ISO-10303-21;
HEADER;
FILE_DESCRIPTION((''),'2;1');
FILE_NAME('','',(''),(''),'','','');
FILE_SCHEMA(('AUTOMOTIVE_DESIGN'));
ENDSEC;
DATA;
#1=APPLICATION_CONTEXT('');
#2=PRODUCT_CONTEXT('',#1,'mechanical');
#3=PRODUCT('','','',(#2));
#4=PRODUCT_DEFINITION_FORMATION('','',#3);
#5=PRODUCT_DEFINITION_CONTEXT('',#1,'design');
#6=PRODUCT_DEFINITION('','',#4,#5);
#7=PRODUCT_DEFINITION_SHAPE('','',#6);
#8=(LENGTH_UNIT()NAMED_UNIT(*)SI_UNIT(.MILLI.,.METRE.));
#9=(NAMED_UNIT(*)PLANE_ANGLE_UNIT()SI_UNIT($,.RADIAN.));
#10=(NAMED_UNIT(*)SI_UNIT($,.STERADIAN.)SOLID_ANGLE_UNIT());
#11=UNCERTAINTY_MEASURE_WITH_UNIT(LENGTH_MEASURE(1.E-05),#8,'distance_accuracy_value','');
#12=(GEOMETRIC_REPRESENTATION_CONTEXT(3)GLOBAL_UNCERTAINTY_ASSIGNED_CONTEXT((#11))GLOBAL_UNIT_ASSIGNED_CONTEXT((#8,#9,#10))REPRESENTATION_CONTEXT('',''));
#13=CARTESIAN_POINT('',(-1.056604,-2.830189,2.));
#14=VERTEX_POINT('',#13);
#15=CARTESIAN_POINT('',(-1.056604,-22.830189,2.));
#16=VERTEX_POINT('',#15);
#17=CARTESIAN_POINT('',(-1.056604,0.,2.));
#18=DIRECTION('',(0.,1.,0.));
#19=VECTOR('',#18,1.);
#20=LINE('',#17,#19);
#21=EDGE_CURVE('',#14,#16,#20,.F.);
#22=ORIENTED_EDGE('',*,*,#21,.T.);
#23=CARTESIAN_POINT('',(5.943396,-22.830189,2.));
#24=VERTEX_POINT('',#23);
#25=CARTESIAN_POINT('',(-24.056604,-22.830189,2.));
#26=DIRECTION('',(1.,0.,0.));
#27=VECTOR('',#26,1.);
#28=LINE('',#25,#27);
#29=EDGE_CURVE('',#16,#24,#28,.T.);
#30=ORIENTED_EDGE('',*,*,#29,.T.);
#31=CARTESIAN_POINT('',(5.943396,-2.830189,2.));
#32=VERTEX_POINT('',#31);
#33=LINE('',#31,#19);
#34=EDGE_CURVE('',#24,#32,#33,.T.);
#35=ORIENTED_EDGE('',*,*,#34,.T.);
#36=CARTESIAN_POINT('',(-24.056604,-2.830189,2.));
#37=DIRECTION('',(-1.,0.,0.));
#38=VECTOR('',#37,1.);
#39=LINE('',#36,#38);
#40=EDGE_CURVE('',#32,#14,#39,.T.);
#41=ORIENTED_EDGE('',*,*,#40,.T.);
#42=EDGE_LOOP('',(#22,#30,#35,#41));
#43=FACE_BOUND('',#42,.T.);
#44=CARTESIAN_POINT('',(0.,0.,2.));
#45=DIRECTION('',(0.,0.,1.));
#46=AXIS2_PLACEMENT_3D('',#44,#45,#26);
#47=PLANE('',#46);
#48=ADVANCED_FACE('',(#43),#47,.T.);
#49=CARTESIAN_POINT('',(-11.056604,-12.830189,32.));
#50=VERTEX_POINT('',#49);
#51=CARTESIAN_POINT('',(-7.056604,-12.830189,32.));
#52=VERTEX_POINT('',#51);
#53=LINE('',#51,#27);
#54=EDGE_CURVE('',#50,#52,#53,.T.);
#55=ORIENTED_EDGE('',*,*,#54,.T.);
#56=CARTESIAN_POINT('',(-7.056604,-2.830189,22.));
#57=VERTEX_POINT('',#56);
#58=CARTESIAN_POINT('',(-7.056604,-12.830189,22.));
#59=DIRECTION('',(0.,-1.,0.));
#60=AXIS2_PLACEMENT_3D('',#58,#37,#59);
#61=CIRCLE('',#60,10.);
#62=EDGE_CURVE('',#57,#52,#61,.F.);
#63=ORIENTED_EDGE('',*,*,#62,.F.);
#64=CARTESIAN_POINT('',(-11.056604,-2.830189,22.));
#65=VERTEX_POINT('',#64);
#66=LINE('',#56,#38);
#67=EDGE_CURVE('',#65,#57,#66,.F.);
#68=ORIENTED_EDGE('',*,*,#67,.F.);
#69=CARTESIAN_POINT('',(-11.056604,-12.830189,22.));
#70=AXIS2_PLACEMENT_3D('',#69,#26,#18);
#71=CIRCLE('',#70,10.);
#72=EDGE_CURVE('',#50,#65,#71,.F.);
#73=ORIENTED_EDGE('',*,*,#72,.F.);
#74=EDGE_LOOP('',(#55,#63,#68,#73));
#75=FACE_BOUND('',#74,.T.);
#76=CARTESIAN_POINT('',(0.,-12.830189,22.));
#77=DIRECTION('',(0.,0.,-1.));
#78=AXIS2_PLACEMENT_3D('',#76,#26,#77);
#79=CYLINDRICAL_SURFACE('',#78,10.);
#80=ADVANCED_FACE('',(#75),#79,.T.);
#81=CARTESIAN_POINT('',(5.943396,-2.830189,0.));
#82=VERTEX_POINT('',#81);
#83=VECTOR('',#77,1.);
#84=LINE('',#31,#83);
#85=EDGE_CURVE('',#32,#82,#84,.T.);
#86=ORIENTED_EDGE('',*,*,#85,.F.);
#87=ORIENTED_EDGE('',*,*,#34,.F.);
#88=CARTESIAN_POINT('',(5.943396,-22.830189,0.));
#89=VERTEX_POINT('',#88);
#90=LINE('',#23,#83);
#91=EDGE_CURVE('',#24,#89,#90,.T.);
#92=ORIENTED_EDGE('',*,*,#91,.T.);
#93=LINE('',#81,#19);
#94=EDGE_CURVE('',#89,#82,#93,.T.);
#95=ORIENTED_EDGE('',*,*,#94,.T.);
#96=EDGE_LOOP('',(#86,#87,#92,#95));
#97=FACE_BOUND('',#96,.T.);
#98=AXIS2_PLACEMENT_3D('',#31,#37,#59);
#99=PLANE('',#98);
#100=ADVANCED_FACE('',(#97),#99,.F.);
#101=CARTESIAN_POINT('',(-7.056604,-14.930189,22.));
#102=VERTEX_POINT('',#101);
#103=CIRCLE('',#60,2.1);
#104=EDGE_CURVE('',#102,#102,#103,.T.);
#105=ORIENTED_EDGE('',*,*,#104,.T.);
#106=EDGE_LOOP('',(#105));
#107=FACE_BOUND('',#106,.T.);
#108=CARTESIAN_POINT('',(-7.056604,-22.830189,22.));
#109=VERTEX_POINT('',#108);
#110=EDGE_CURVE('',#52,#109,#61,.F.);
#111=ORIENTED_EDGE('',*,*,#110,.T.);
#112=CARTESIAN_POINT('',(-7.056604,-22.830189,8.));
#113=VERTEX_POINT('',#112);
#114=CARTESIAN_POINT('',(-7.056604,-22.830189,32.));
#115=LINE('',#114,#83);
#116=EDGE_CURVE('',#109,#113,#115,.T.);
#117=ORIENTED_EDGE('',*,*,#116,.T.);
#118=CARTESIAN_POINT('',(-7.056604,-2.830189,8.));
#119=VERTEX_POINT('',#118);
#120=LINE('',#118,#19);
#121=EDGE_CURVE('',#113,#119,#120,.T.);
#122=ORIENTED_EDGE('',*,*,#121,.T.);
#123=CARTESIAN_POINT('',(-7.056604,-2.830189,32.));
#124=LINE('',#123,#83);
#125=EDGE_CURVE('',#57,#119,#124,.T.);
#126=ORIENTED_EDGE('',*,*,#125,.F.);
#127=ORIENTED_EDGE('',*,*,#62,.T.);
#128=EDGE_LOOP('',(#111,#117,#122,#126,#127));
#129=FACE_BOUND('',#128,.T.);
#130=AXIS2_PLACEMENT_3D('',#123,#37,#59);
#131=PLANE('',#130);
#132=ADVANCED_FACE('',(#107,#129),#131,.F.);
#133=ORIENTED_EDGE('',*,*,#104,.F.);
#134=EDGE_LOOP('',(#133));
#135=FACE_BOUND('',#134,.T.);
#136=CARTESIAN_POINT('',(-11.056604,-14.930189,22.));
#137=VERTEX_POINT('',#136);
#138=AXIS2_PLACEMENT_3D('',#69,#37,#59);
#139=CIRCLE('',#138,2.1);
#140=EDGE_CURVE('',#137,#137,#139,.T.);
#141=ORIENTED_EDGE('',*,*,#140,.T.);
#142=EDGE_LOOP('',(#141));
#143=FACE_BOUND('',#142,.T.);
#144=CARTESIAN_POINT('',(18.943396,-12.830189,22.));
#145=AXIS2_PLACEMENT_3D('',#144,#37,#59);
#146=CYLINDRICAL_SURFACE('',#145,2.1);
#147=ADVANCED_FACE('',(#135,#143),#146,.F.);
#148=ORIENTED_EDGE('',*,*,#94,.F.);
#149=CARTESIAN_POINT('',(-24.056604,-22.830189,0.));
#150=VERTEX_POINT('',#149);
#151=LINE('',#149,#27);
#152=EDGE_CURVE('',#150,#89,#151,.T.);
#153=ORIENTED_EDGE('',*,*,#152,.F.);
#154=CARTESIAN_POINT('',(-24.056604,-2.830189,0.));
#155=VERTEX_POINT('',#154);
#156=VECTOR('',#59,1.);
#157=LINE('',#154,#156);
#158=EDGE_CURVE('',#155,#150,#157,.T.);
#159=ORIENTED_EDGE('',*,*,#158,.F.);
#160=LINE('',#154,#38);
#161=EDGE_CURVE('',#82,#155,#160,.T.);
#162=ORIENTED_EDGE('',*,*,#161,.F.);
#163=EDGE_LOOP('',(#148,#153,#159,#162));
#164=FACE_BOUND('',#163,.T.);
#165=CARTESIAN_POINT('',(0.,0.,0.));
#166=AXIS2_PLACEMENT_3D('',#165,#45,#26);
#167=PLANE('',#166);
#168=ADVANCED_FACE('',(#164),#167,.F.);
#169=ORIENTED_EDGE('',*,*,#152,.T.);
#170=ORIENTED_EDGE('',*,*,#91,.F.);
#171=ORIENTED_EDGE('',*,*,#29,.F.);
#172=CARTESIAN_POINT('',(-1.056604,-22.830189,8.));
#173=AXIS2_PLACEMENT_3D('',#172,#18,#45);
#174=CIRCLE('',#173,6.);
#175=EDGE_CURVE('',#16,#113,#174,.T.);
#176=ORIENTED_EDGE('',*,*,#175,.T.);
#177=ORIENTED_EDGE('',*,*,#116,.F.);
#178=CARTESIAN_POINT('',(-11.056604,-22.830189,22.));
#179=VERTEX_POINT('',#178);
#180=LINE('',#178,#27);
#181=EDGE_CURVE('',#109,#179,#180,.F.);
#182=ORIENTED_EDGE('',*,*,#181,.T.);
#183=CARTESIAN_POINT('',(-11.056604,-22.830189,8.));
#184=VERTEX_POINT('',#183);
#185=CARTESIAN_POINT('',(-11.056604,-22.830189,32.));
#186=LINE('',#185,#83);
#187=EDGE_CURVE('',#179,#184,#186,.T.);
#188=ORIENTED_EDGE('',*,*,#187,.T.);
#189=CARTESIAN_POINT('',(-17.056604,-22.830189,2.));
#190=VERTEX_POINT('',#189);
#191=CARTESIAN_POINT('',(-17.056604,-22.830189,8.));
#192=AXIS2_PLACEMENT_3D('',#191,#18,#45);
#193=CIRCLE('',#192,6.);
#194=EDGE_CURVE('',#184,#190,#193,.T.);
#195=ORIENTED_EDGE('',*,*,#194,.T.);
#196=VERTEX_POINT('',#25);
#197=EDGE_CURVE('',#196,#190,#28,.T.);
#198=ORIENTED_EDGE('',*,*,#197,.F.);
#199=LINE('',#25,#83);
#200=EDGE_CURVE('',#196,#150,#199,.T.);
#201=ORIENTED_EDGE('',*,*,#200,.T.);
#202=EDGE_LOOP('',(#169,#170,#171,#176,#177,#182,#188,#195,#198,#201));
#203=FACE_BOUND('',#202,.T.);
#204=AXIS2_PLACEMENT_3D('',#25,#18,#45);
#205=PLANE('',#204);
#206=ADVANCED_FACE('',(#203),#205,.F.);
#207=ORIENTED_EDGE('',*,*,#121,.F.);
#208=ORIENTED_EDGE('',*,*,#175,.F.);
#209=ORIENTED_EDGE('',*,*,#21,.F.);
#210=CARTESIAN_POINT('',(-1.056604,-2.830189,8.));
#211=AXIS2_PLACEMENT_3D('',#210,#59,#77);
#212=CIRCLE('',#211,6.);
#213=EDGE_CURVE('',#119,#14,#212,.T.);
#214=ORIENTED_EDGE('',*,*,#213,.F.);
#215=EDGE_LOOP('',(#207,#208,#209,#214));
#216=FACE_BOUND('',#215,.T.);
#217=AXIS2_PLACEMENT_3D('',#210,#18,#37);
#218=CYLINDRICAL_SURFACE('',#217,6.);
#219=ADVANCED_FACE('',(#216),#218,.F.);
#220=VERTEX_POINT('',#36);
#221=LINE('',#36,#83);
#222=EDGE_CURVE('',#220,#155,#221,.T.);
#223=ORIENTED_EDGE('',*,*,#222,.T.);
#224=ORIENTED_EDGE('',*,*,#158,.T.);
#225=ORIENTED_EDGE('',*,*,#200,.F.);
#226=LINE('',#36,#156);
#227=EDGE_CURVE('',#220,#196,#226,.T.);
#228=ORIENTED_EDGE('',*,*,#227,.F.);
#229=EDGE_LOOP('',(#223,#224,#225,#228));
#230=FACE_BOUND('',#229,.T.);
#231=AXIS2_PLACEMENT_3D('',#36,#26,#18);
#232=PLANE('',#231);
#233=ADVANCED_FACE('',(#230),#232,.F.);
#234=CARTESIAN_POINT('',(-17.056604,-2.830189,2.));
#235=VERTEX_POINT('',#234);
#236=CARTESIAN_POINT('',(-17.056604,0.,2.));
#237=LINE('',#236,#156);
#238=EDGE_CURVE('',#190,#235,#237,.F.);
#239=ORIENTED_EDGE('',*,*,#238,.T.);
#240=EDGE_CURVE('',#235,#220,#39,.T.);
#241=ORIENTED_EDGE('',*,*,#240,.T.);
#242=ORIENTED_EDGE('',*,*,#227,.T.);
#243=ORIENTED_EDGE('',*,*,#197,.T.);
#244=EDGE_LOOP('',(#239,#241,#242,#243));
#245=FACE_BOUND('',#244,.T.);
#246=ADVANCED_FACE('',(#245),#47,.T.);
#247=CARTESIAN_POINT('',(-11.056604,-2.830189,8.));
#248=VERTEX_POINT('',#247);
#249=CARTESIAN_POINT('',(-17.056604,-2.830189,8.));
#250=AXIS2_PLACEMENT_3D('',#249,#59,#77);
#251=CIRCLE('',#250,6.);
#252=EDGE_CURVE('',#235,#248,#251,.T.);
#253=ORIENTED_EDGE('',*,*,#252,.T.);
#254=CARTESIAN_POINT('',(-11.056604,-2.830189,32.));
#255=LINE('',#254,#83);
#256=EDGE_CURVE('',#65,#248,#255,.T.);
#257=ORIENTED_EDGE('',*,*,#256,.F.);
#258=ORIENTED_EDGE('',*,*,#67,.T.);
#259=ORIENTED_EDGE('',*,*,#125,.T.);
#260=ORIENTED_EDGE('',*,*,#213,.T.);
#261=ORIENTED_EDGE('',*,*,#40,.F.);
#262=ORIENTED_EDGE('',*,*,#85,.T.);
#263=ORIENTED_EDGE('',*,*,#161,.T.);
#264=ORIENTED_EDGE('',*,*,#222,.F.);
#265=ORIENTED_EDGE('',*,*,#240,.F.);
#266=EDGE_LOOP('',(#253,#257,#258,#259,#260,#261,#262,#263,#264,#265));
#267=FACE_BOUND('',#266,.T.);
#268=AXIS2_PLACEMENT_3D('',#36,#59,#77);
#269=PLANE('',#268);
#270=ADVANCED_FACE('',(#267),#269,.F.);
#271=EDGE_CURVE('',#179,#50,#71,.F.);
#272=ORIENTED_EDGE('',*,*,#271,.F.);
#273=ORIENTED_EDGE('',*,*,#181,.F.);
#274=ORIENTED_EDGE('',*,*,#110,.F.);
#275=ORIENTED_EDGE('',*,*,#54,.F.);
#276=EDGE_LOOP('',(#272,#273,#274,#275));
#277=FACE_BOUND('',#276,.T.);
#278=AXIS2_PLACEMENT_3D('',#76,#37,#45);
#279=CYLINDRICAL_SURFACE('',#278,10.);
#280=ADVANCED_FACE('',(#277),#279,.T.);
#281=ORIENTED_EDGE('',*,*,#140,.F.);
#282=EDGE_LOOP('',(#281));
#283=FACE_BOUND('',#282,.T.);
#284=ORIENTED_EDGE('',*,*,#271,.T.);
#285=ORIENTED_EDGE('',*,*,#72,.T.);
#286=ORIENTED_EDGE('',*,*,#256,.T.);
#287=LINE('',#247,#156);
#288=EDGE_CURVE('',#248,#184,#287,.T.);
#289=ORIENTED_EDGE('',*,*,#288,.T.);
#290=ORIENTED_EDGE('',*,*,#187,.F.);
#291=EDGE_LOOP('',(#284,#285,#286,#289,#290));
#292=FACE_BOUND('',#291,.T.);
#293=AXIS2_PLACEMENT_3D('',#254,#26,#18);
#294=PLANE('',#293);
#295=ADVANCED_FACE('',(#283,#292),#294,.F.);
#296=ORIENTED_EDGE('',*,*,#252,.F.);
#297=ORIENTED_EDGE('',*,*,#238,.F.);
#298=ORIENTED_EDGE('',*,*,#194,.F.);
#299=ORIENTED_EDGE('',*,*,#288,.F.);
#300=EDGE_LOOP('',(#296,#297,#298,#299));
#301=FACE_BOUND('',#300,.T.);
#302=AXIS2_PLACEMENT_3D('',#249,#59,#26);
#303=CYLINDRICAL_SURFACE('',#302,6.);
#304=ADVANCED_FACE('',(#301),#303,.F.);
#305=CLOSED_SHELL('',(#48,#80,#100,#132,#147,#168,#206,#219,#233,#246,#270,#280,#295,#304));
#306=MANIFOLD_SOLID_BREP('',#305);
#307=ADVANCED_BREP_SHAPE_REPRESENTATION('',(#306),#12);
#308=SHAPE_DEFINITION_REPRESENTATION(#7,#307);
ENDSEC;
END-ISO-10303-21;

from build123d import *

# Parameters (mm, degrees)
SKETCH_4_W          = 30
SKETCH_4_H          = 20
EXTRUDE_1_DEPTH     = 2
SKETCH_5_W          = 4
SKETCH_5_H          = 20
EXTRUDE_2_DEPTH     = 30
FILLET_1_R          = 10
SKETCH_6_R          = 2.1
CUT_EXTRUDE_2_DEPTH = 30
FILLET_2_R          = 6


with BuildPart() as part:
    # 草图4 → 凸台-拉伸1 (new body)
    with BuildSketch(Plane.XY):
        with Locations((-9.056603774, -12.830188679)):
            Rectangle(SKETCH_4_W, SKETCH_4_H)
    extrude(amount=EXTRUDE_1_DEPTH)

    # 草图5 → 凸台-拉伸2 (add)
    with BuildSketch(Plane.XY.offset(2)):
        with Locations((-9.056603774, -12.830188679)):
            Rectangle(SKETCH_5_W, SKETCH_5_H)
    extrude(amount=EXTRUDE_2_DEPTH)

    # 圆角1
    fillet_1_edges = [part.edges().sort_by_distance(p)[0] for p in [
        (-9.056603774, -2.830188679, 32),
        (-9.056603774, -22.830188679, 32),
    ]]
    fillet(fillet_1_edges, radius=FILLET_1_R - 0.0001)  # a hair under: the kernel refuses the full size

    # 草图6 → 切除-拉伸2 (cut)
    with BuildSketch(Plane.ZY.offset(11.056603774)):
        with Locations(Location((22, -12.830188679, 0), (0, 0, 270))):
            Circle(SKETCH_6_R)
    extrude(amount=-CUT_EXTRUDE_2_DEPTH, mode=Mode.SUBTRACT)

    # 圆角2
    fillet_2_edges = [part.edges().sort_by_distance(p)[0] for p in [
        (-11.056603774, -12.830188679, 2),
        (-7.056603774, -12.830188679, 2),
    ]]
    fillet(fillet_2_edges, radius=FILLET_2_R)


solid = part.part
